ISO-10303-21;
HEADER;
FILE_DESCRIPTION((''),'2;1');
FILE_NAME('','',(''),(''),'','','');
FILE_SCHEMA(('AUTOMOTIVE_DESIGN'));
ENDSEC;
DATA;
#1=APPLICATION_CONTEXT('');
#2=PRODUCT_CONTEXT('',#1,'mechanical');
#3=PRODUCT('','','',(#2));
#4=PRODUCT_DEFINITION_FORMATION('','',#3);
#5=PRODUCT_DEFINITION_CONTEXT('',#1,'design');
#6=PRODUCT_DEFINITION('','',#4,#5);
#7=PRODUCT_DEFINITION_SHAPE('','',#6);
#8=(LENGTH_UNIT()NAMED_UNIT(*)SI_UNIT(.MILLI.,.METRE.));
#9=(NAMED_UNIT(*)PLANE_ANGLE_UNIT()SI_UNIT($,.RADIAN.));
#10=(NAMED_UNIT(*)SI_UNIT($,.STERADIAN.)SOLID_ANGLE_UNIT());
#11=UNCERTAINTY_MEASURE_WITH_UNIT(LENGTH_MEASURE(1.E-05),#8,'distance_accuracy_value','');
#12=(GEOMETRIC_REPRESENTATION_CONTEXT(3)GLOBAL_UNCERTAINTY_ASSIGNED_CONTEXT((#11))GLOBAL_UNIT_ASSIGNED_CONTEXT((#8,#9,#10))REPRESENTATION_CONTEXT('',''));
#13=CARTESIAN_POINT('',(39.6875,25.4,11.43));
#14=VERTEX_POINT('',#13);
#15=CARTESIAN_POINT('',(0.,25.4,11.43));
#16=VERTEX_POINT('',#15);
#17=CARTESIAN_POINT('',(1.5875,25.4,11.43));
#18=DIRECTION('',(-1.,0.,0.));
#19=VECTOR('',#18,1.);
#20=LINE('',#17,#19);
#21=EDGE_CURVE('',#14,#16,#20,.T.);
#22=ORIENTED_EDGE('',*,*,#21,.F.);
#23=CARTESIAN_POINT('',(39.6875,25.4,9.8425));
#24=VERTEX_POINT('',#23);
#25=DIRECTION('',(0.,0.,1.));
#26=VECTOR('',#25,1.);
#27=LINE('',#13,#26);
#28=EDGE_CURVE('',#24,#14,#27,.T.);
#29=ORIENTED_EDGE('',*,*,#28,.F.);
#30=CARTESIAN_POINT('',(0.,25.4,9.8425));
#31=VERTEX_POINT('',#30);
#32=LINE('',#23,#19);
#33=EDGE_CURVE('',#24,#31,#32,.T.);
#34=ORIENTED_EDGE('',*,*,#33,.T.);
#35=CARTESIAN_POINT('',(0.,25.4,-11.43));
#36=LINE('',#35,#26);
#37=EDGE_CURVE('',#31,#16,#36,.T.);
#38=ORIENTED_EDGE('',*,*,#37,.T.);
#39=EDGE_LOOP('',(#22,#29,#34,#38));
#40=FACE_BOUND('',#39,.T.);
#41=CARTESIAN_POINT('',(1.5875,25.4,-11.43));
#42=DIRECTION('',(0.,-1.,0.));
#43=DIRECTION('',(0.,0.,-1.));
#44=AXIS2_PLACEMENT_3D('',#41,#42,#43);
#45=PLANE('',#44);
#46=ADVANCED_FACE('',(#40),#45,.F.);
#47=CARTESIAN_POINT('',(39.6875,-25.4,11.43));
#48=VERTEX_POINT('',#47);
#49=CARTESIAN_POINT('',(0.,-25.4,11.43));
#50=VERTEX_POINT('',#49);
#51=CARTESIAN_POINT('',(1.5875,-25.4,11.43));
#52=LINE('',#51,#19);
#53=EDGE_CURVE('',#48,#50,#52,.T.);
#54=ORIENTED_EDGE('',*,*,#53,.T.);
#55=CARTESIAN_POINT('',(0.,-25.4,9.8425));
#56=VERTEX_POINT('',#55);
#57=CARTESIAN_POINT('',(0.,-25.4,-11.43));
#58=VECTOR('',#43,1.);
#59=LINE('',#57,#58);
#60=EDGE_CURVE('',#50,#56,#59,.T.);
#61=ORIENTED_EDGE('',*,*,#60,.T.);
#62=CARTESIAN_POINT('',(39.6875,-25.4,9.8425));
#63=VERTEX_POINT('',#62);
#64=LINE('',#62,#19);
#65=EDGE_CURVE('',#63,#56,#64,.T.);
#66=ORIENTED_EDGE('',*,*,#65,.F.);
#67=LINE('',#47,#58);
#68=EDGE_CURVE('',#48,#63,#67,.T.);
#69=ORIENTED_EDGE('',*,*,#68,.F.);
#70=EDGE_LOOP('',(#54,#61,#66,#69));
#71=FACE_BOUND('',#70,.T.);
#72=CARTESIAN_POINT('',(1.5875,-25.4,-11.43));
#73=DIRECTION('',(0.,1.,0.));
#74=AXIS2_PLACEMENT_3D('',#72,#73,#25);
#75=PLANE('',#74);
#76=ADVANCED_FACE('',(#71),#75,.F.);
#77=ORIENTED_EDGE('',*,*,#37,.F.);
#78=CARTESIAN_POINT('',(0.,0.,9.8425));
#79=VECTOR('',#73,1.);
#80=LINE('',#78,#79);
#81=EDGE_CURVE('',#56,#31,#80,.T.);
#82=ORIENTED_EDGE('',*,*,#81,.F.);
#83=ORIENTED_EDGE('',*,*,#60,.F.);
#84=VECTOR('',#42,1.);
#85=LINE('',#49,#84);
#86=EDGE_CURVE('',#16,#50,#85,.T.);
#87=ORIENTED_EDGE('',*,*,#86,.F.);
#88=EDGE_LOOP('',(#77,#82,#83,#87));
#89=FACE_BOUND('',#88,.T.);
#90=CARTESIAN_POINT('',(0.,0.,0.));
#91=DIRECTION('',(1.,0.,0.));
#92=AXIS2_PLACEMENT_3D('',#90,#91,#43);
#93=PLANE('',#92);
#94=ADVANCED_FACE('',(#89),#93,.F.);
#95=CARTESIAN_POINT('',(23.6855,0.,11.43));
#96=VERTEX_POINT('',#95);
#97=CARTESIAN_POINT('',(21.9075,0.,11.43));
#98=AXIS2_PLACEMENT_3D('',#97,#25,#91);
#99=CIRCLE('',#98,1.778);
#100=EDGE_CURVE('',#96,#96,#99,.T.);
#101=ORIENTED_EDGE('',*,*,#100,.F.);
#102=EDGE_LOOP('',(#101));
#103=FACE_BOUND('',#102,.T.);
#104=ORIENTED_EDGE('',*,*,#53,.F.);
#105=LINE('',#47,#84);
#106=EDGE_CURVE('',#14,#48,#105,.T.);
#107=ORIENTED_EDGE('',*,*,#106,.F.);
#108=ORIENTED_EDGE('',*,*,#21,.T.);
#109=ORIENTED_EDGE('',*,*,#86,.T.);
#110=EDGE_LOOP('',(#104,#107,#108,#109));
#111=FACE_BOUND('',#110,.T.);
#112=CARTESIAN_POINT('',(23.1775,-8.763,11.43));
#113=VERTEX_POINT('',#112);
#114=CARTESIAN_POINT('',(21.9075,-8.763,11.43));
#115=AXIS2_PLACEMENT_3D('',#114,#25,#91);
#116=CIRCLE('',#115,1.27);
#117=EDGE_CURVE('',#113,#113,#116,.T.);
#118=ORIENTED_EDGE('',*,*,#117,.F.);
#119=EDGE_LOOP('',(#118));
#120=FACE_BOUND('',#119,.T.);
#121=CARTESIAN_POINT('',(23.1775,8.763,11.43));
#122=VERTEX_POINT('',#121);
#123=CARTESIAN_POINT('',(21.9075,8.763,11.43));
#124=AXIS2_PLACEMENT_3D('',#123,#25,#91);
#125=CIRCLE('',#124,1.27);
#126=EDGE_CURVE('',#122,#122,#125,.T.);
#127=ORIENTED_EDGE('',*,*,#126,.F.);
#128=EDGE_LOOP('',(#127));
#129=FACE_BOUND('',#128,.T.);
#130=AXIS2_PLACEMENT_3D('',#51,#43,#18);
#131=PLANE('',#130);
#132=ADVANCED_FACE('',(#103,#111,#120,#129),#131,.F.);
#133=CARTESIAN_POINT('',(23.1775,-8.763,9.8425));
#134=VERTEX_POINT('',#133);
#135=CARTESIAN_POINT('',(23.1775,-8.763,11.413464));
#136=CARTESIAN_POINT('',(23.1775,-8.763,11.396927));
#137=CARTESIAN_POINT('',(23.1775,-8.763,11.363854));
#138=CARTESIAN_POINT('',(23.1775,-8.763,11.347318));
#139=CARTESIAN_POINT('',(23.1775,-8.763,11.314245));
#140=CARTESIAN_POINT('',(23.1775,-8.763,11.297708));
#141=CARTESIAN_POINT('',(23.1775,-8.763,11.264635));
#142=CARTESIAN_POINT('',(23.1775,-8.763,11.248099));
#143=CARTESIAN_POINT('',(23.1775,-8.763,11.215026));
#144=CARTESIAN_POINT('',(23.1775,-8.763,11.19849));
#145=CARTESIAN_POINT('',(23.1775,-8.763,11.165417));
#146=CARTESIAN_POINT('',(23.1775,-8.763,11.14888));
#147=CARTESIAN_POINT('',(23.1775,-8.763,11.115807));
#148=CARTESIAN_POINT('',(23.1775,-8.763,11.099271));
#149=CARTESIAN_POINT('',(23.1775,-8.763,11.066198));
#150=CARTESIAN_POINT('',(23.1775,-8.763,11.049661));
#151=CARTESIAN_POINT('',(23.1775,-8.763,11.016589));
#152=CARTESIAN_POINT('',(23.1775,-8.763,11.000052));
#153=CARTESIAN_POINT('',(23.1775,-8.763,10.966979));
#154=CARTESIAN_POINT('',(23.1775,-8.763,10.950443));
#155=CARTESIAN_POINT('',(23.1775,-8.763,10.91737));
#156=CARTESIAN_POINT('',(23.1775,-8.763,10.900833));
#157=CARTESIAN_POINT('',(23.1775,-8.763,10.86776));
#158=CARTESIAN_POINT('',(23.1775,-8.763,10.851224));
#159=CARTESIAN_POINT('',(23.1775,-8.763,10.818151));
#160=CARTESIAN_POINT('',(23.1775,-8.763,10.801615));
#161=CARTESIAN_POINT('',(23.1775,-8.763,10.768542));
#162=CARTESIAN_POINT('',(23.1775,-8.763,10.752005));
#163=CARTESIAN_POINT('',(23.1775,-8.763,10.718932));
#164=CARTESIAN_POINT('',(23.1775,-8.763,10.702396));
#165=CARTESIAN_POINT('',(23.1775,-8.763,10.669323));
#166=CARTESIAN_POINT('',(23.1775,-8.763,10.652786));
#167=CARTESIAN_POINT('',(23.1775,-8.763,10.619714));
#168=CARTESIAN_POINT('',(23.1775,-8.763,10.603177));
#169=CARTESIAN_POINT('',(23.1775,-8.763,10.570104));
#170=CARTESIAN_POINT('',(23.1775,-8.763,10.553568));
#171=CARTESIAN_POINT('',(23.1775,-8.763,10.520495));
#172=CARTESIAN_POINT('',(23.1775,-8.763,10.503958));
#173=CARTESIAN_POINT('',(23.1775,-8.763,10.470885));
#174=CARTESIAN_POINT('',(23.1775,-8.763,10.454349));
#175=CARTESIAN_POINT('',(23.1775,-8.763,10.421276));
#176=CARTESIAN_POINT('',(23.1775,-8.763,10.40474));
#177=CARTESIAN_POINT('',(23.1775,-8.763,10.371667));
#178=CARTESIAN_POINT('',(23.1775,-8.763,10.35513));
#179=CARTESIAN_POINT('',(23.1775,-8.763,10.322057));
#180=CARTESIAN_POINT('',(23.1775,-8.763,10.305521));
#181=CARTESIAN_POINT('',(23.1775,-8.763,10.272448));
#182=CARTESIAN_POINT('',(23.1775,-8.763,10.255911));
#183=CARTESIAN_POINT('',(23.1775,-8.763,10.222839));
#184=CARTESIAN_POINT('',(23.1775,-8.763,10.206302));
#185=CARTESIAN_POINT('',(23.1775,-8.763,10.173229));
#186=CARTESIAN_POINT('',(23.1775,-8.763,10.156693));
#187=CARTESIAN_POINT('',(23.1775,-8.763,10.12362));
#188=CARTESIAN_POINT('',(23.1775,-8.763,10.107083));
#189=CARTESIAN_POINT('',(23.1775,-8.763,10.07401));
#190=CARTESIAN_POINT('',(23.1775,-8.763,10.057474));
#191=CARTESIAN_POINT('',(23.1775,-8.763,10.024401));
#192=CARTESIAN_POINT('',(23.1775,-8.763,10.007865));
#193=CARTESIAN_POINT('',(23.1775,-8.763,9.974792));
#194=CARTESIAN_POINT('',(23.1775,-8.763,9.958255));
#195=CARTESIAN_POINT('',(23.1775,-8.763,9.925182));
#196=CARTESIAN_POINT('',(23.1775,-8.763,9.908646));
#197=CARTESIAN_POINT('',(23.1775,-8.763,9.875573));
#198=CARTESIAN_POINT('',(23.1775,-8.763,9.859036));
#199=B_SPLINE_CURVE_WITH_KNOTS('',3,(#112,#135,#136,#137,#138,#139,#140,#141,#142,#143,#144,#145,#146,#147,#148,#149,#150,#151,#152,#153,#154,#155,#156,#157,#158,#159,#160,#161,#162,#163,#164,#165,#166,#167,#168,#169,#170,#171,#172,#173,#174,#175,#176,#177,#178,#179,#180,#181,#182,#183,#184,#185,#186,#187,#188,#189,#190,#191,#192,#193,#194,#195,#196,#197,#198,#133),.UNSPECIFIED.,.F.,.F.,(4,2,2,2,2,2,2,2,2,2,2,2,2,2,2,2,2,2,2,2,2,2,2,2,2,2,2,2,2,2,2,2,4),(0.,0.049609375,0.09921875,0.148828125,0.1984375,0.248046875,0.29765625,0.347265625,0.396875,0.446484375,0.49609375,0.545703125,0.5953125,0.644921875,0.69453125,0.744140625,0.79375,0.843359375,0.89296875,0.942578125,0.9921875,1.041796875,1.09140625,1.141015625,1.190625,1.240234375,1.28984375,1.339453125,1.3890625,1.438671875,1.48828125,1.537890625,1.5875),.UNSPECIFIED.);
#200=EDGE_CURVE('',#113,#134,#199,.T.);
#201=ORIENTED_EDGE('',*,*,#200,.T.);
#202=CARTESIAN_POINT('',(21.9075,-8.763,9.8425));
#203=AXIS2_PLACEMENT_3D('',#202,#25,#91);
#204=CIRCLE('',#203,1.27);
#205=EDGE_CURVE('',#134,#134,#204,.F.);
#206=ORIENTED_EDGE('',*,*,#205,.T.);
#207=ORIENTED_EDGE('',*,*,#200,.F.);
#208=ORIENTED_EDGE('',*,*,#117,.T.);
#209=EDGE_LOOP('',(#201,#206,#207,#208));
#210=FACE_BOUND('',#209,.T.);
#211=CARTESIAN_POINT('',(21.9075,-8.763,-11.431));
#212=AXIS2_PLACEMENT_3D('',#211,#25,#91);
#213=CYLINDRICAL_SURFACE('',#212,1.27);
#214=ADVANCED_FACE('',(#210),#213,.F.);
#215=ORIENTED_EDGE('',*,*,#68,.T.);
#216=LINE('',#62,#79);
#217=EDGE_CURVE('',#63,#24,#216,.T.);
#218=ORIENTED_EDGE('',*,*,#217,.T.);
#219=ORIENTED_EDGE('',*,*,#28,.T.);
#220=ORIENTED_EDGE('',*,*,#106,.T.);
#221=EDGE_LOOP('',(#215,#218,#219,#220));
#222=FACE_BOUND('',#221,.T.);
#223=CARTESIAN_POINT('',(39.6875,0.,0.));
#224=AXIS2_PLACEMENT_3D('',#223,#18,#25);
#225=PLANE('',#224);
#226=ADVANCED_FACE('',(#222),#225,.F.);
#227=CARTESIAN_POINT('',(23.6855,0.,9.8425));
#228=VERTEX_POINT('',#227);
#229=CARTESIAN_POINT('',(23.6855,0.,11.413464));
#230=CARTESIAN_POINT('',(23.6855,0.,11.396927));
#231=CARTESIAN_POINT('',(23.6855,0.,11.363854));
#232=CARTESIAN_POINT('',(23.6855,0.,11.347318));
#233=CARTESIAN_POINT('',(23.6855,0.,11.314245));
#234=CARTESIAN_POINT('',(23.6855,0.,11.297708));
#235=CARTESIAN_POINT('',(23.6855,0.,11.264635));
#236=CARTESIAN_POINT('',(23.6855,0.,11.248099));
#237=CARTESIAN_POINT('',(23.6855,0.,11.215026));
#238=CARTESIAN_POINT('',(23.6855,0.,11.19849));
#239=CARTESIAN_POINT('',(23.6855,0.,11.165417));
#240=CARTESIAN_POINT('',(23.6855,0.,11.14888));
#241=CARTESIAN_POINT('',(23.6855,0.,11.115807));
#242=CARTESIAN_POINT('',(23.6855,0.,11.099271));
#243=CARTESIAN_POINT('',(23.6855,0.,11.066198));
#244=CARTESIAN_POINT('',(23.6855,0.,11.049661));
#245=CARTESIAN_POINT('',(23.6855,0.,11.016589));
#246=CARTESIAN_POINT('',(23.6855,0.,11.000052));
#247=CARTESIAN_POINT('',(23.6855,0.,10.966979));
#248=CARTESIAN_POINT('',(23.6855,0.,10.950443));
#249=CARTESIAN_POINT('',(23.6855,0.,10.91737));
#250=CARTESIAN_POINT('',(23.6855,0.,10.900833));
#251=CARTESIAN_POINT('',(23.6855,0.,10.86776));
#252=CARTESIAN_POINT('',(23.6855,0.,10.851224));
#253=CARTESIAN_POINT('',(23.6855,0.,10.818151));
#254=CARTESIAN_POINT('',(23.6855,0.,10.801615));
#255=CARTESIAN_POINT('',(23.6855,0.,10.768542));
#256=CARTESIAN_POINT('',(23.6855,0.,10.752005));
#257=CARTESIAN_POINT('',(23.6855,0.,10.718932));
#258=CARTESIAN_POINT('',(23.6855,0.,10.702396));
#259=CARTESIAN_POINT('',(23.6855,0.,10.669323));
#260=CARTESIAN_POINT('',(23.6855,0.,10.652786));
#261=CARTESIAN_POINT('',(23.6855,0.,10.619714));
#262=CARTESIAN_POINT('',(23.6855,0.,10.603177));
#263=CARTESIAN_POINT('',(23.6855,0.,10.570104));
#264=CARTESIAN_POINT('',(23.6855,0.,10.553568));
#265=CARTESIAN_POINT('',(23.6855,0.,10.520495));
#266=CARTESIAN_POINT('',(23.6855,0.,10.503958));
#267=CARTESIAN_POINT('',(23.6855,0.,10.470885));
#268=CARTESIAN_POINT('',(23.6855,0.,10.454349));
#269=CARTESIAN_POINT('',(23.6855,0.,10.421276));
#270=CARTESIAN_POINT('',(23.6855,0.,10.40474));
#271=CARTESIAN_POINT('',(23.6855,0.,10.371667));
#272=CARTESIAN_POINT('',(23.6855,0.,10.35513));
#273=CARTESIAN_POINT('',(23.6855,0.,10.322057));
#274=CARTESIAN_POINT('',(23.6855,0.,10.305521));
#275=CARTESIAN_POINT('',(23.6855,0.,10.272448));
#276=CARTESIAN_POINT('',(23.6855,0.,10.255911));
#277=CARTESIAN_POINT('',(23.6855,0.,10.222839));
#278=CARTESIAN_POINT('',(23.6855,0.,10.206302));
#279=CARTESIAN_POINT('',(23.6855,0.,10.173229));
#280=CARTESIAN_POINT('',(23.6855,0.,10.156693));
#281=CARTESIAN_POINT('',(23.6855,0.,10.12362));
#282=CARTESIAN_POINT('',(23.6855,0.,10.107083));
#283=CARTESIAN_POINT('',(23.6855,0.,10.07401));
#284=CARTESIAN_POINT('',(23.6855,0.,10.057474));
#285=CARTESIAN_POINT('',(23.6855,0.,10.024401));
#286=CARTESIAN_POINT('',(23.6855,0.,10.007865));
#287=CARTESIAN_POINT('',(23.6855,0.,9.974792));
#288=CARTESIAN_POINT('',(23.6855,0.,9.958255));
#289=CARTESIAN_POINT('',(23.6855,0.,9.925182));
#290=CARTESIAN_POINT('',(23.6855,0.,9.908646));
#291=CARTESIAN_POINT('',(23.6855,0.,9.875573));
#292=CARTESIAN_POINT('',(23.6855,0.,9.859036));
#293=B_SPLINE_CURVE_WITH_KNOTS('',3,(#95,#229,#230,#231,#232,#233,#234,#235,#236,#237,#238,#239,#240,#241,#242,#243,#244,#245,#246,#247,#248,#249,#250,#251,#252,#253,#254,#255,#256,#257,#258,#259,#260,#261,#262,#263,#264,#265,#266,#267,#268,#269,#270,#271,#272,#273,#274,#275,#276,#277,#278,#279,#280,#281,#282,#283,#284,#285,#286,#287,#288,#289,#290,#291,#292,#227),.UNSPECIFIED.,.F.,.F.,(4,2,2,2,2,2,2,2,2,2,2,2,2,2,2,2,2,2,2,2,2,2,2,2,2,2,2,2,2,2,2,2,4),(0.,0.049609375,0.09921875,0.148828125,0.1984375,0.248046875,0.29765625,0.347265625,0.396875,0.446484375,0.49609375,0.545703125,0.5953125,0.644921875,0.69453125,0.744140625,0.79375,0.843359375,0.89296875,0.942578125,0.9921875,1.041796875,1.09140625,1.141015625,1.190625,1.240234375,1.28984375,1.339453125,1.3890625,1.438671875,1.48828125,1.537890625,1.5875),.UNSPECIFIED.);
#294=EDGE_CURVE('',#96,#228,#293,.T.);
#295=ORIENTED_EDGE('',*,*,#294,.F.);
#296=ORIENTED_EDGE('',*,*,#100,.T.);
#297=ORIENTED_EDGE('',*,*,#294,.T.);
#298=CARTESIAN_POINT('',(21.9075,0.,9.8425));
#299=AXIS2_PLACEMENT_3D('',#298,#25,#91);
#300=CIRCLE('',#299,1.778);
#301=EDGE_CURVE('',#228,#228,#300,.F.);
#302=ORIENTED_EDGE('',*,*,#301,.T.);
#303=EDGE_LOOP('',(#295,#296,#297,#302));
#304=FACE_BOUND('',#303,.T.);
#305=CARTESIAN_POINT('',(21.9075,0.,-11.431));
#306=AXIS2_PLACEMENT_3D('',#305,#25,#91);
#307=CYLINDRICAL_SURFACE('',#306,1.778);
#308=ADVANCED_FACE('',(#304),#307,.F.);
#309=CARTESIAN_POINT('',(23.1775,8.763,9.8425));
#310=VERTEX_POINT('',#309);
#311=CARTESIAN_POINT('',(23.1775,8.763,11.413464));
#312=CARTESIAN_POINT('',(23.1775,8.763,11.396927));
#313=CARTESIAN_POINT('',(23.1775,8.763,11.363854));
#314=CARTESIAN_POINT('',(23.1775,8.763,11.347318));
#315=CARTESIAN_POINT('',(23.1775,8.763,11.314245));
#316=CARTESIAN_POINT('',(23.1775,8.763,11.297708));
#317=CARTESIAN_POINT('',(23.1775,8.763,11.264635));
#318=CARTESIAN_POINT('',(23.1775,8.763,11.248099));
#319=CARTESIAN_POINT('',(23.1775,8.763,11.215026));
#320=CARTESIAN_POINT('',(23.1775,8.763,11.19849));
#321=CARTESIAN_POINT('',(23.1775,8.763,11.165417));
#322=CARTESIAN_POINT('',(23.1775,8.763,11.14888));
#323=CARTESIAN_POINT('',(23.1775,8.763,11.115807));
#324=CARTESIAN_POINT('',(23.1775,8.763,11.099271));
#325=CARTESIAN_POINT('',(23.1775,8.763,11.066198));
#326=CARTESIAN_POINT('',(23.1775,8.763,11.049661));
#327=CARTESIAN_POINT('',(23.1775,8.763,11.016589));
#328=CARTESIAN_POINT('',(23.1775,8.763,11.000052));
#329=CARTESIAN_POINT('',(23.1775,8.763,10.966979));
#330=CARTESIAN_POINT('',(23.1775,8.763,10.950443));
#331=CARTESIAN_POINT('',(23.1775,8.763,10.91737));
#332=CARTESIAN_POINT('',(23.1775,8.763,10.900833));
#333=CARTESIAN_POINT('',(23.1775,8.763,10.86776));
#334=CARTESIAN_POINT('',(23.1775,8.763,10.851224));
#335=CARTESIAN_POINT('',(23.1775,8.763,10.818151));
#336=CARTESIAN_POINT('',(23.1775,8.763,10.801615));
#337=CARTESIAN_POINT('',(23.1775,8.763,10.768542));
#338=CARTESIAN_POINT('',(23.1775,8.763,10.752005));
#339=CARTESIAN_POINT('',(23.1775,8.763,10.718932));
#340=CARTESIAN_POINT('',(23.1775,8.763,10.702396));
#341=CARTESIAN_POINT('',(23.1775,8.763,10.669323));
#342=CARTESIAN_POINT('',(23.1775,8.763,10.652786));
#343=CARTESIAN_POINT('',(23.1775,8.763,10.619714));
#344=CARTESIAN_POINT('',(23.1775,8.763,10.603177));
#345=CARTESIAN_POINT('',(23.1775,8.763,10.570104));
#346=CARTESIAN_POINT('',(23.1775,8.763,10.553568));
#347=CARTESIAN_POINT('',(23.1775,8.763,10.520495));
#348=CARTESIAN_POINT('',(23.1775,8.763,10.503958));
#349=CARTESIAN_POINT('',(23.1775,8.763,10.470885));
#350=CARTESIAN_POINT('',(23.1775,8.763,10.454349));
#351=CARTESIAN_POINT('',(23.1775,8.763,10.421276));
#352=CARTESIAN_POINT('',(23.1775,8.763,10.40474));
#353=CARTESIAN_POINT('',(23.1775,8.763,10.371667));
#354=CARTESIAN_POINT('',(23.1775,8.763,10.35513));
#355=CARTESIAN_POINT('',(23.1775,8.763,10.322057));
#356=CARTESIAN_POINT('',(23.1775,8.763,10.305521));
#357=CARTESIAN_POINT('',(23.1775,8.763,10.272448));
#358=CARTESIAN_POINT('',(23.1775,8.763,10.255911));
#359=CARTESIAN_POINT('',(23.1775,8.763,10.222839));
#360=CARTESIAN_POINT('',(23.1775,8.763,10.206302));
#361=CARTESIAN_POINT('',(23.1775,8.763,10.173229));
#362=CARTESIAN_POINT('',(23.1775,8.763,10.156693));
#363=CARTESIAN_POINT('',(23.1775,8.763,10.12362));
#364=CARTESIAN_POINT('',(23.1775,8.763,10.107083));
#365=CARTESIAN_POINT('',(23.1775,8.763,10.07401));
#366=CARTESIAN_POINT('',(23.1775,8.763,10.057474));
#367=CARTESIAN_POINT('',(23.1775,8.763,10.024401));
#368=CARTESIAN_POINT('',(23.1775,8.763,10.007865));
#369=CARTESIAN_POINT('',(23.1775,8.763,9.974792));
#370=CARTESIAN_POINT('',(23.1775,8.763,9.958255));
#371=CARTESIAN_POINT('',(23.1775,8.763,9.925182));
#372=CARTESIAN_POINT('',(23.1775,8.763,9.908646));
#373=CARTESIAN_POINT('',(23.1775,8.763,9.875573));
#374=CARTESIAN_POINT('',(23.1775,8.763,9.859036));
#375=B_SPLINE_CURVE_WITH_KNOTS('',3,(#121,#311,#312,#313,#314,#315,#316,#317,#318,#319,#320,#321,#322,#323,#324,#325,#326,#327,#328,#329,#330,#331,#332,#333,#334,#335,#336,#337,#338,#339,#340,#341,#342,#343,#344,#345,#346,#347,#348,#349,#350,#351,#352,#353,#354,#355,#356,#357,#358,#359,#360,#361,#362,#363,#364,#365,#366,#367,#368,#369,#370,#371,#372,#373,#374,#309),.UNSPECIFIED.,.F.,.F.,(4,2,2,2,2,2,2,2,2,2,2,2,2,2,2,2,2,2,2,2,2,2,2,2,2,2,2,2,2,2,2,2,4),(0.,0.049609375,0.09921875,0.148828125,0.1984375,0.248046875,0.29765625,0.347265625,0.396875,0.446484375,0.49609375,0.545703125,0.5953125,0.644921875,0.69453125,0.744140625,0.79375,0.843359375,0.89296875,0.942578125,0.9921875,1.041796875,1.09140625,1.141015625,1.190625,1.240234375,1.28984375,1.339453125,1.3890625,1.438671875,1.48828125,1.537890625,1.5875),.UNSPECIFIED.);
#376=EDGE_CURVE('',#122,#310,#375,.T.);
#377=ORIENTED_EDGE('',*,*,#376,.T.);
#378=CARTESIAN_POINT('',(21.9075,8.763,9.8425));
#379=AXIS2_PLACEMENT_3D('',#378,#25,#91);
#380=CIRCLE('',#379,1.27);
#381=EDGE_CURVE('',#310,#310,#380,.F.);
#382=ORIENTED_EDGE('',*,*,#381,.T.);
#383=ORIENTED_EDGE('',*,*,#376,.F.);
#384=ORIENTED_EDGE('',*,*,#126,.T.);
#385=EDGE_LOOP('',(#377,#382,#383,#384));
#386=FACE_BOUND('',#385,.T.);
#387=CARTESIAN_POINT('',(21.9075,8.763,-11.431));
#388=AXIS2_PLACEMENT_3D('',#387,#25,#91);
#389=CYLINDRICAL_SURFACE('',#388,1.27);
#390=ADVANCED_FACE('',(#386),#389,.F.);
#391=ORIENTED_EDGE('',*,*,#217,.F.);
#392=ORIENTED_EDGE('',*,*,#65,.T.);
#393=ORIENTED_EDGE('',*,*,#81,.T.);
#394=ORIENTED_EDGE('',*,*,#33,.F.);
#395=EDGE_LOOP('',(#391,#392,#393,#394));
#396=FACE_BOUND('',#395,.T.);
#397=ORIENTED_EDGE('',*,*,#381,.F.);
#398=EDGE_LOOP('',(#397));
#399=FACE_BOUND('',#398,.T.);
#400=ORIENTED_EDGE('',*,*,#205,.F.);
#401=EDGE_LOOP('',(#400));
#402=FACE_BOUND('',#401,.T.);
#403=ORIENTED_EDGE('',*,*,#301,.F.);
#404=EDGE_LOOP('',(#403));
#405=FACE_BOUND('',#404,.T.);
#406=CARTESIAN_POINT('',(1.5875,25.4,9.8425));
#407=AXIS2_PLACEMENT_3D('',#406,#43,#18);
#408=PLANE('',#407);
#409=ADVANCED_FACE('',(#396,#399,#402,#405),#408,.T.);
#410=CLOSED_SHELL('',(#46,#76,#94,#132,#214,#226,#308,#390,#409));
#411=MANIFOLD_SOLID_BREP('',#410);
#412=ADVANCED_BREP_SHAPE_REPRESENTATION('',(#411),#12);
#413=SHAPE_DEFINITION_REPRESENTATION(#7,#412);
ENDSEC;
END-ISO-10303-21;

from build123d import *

# Parameters (mm, degrees)
SKETCH2_W           = 22.86
SKETCH2_H           = 50.8
BOSS_EXTRUDE1_DEPTH = 1.5875
SKETCH3_W           = 1.5875
SKETCH3_H           = 50.8
BOSS_EXTRUDE2_DEPTH = 38.1
CUT_EXTRUDE1_REACH  = 54.372
SKETCH4_R           = 1.778
SKETCH4_R_2         = 1.27


with BuildPart() as part:
    # Sketch2 → Boss-Extrude1 (new body)
    with BuildSketch(Plane(origin=(0, 0, 0), x_dir=(0, 0, -1), z_dir=(1, 0, 0))):
        Rectangle(SKETCH2_W, SKETCH2_H)
    extrude(amount=BOSS_EXTRUDE1_DEPTH)

    # Sketch3 → Boss-Extrude2 (add)
    with BuildSketch(Plane(origin=(1.5875, 0, 0), x_dir=(0, 0, -1), z_dir=(1, 0, 0))):
        with Locations((-10.63625, 0)):
            Rectangle(SKETCH3_W, SKETCH3_H)
    extrude(amount=BOSS_EXTRUDE2_DEPTH)

    # Sketch4 → Cut-Extrude1 (cut, up to next)
    with BuildSketch(Plane.XY.offset(11.43), mode=Mode.PRIVATE) as cut_extrude1_sk1:
        with Locations((21.9075, 0)):
            Circle(SKETCH4_R)
    cut_extrude1_tool1 = extrude(cut_extrude1_sk1.sketch, amount=-CUT_EXTRUDE1_REACH, mode=Mode.PRIVATE) & part.part
    # Sketch4 → Cut-Extrude1 (cut, up to next)
    with BuildSketch(Plane.XY.offset(11.43), mode=Mode.PRIVATE) as cut_extrude1_sk2:
        with Locations((21.9075, 8.763)):
            Circle(SKETCH4_R_2)
    cut_extrude1_tool2 = extrude(cut_extrude1_sk2.sketch, amount=-CUT_EXTRUDE1_REACH, mode=Mode.PRIVATE) & part.part
    # Sketch4 → Cut-Extrude1 (cut, up to next)
    with BuildSketch(Plane.XY.offset(11.43), mode=Mode.PRIVATE) as cut_extrude1_sk3:
        with Locations((21.9075, -8.763)):
            Circle(SKETCH4_R_2)
    cut_extrude1_tool3 = extrude(cut_extrude1_sk3.sketch, amount=-CUT_EXTRUDE1_REACH, mode=Mode.PRIVATE) & part.part
    add(cut_extrude1_tool1.solids().sort_by_distance((21.9075, 0, 11.43))[0], mode=Mode.SUBTRACT)
    add(cut_extrude1_tool2.solids().sort_by_distance((21.9075, 8.763, 11.43))[0], mode=Mode.SUBTRACT)
    add(cut_extrude1_tool3.solids().sort_by_distance((21.9075, -8.763, 11.43))[0], mode=Mode.SUBTRACT)

    # Split1
    split(bisect_by=Plane(origin=(39.6875, -25.4, 9.8425), x_dir=(1, 0, 0), z_dir=(0, 0, 1)), keep=Keep.TOP)


solid = part.part
